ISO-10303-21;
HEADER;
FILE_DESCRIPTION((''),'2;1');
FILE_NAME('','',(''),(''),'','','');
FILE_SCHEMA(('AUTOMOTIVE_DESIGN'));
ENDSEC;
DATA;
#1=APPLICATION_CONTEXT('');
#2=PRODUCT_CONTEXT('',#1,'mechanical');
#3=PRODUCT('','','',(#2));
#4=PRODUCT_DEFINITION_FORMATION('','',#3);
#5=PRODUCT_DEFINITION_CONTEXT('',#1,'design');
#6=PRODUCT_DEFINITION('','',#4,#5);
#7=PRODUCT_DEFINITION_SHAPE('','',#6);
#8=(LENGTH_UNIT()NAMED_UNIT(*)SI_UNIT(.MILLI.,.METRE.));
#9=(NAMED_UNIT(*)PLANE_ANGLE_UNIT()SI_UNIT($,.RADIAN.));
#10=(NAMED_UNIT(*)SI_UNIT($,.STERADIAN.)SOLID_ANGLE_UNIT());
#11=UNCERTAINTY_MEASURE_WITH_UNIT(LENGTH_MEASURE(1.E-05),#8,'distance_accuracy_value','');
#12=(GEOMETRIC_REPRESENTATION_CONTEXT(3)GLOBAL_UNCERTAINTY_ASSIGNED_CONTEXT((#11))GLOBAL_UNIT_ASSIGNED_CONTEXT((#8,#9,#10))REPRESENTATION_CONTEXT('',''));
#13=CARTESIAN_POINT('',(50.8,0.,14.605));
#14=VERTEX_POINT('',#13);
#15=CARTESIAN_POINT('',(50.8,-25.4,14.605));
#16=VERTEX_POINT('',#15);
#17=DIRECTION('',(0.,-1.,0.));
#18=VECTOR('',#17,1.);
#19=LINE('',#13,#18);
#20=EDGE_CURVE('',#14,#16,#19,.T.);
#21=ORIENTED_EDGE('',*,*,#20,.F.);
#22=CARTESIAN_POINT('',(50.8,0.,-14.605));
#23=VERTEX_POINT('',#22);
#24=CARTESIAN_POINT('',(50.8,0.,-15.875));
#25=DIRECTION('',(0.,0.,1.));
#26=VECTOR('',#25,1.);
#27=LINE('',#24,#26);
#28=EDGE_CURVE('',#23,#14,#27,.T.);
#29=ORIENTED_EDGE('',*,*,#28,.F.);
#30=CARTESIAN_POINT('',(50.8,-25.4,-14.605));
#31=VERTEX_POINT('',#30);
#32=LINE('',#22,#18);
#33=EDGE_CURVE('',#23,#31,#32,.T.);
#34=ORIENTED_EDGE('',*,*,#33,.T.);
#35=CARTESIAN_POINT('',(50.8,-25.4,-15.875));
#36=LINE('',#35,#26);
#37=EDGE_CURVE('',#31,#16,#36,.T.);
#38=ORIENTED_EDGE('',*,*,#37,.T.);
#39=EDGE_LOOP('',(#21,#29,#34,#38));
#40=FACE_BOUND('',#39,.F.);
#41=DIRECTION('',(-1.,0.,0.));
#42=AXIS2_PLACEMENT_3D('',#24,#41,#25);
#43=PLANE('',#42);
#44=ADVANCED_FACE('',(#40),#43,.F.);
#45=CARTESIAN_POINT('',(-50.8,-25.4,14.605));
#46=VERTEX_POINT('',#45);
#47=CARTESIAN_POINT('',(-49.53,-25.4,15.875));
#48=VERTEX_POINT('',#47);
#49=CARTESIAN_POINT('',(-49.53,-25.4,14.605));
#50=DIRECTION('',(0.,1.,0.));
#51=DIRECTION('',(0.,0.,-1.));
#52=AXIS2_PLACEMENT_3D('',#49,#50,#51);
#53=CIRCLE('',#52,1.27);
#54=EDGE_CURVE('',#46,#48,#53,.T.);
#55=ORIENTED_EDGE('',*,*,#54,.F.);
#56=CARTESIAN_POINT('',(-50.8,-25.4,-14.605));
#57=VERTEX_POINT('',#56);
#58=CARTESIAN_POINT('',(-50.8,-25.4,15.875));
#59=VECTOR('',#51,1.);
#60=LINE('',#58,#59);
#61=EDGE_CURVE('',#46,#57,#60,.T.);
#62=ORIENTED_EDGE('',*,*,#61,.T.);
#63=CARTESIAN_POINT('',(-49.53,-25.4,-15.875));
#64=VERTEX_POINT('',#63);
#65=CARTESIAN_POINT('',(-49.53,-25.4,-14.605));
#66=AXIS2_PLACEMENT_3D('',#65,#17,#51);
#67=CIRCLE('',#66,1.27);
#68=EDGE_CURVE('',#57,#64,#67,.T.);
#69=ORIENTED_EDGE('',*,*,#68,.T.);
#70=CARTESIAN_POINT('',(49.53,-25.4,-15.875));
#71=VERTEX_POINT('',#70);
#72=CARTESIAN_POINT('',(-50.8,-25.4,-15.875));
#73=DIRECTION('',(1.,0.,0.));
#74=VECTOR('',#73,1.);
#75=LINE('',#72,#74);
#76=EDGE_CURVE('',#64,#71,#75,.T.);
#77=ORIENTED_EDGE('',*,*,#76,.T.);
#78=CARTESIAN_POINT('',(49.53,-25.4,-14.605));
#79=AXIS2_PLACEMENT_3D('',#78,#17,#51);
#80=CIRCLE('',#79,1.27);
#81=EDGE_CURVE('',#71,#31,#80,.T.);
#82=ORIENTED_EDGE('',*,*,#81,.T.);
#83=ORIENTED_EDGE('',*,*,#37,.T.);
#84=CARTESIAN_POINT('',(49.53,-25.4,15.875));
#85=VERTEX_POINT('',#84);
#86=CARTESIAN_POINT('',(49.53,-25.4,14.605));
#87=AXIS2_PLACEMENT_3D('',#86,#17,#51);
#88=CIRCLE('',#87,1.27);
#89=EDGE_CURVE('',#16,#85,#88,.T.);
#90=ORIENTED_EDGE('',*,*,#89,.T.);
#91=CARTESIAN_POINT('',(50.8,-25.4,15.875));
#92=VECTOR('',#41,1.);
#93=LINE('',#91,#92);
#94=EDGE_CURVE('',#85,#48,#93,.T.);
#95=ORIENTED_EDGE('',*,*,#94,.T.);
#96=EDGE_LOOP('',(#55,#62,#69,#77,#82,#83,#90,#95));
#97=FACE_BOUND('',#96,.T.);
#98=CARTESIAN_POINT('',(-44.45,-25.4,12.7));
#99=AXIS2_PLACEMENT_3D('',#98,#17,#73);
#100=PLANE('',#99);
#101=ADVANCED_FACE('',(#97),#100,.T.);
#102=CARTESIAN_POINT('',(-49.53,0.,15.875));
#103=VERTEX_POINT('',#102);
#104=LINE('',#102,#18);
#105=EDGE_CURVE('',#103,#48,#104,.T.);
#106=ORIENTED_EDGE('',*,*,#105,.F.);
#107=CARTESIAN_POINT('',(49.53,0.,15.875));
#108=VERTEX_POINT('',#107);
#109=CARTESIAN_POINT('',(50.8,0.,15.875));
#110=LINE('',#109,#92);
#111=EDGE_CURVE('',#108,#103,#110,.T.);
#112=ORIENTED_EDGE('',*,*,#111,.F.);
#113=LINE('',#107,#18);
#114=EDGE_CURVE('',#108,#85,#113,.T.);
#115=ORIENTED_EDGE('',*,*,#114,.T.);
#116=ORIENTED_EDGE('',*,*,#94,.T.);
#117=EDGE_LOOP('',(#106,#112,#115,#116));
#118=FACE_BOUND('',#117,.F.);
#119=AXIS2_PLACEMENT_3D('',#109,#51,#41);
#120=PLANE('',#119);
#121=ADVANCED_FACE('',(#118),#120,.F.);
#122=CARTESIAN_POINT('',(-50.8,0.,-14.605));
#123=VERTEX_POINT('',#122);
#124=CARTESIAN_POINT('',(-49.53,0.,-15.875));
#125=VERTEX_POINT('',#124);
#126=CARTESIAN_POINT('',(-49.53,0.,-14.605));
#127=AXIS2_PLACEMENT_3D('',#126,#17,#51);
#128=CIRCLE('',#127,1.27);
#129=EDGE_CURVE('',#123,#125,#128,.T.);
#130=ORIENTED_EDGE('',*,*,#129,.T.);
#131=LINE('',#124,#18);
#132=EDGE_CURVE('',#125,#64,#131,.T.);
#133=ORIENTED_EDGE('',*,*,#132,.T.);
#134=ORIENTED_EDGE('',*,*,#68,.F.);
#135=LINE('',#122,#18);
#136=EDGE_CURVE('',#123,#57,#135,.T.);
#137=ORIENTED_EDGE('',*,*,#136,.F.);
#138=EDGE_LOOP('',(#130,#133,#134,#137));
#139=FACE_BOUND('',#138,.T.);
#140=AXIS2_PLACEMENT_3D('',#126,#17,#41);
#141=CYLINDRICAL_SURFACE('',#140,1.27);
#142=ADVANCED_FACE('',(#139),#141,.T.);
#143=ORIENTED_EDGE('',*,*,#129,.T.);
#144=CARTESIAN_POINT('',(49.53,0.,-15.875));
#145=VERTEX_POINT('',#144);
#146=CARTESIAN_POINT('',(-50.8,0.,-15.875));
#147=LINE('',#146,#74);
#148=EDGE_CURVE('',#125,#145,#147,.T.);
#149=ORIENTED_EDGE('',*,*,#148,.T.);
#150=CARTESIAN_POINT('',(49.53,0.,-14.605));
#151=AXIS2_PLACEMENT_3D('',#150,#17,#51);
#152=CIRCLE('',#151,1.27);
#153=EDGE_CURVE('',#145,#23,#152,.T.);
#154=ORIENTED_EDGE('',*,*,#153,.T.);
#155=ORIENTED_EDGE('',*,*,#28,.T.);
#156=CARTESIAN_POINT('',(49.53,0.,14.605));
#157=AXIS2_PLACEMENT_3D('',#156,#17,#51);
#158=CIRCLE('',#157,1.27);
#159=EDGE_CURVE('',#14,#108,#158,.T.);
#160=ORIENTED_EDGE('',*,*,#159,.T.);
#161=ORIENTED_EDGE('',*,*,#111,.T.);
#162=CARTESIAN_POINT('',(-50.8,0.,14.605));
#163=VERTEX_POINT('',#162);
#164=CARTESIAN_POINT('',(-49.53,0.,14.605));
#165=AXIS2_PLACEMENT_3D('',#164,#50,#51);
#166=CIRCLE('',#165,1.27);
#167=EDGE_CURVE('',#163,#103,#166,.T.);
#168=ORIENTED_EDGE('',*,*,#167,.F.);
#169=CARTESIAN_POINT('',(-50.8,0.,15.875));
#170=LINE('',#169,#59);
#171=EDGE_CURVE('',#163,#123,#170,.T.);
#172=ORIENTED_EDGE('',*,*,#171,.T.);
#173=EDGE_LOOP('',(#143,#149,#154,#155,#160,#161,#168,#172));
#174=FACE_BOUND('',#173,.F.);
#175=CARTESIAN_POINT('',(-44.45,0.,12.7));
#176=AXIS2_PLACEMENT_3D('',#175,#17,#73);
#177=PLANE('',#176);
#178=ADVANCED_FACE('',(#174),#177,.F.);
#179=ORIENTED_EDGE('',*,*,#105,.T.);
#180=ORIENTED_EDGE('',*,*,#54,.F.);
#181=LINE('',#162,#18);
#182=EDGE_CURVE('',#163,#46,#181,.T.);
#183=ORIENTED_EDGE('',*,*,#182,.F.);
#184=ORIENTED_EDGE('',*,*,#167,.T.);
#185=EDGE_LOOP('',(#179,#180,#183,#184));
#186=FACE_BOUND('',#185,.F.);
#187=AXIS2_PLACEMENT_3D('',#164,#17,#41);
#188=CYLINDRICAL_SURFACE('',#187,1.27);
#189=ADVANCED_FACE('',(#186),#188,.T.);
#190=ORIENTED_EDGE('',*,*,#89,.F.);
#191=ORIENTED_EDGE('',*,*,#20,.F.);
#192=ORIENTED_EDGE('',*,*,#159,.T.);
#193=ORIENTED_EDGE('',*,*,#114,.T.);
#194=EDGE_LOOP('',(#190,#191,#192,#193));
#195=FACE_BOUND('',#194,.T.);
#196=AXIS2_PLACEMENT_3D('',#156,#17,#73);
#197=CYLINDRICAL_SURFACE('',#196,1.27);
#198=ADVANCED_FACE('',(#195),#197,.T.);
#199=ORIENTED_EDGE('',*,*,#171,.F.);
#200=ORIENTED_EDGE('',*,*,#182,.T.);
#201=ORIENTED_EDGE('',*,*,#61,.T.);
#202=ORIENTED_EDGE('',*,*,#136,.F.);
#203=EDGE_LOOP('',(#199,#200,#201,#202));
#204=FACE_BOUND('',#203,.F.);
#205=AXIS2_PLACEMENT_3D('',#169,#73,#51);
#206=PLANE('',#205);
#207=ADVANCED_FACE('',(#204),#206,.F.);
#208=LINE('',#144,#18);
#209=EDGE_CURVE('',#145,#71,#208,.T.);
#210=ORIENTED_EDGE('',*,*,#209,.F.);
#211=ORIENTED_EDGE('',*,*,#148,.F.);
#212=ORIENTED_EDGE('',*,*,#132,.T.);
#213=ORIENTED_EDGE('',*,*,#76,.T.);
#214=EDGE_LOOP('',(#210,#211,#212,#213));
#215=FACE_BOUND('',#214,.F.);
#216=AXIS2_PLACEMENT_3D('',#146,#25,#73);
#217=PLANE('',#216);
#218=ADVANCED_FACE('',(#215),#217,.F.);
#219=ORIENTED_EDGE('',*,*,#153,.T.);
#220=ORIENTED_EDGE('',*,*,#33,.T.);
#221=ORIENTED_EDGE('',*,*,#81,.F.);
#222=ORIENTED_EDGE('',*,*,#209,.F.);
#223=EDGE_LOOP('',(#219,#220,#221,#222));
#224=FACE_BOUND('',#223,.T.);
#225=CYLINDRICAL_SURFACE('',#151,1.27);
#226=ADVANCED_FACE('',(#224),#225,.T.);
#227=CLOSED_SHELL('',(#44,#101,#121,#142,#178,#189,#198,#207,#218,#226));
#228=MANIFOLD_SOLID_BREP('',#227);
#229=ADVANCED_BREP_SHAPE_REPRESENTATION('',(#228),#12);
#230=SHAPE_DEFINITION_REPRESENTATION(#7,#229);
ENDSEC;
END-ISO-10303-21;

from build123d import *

# Parameters (mm, degrees)
F0_W     = 6.35
F0_H     = 6.35
F1_DEPTH = 25.4
F2_R     = 1.27


with BuildPart() as f1:
    # F0 (on Front) → F1 (new body)
    with BuildSketch(Plane.XZ):
        Polygon((-50.8, 15.875), (-50.8, 9.525), (-44.45, 9.525), (-38.1, 9.525), (-38.1, 15.875), align=None)
        with Locations((-47.625, 6.35)):
            Rectangle(F0_W, F0_H)
        Polygon((-50.8, 3.175), (-50.8, -3.175), (-44.45, -3.175), (-38.1, -3.175), (-38.1, 3.175), (-44.45, 3.175), align=None)
        with Locations((-47.625, -6.35)):
            Rectangle(F0_W, F0_H)
        Polygon((-50.8, -15.875), (0, -15.875), (0, -9.525), (-6.35, -9.525), (-44.45, -9.525), (-50.8, -9.525), align=None)
        Polygon((0, -15.875), (50.8, -15.875), (50.8, -9.525), (44.45, -9.525), (6.35, -9.525), (0, -9.525), align=None)
        with Locations((3.175, -6.35)):
            Rectangle(F0_W, F0_H)
        with Locations((-3.175, -6.35)):
            Rectangle(F0_W, F0_H)
        Polygon((-6.35, -3.175), (0, -3.175), (0, 3.175), (-6.35, 3.175), (-12.7, 3.175), (-12.7, -3.175), align=None)
        Polygon((0, 3.175), (0, -3.175), (6.35, -3.175), (12.7, -3.175), (12.7, 3.175), (6.35, 3.175), align=None)
        with Locations((3.175, 6.35)):
            Rectangle(F0_W, F0_H)
        with Locations((-3.175, 6.35)):
            Rectangle(F0_W, F0_H)
        Polygon((-6.35, 9.525), (0, 9.525), (0, 15.875), (-12.7, 15.875), (-12.7, 9.525), align=None)
        Polygon((0, 15.875), (0, 9.525), (6.35, 9.525), (12.7, 9.525), (12.7, 15.875), align=None)
        Polygon((44.45, 9.525), (50.8, 9.525), (50.8, 15.875), (38.1, 15.875), (38.1, 9.525), align=None)
        with Locations((47.625, 6.35)):
            Rectangle(F0_W, F0_H)
        Polygon((44.45, -3.175), (50.8, -3.175), (50.8, 3.175), (44.45, 3.175), (38.1, 3.175), (38.1, -3.175), align=None)
        with Locations((47.625, -6.35)):
            Rectangle(F0_W, F0_H)
        Polygon((-44.45, -9.525), (-6.35, -9.525), (-6.35, -3.175), (-12.7, -3.175), (-12.7, 3.175), (-6.35, 3.175), (-6.35, 9.525), (-12.7, 9.525), (-12.7, 15.875), (-38.1, 15.875), (-38.1, 9.525), (-44.45, 9.525), (-44.45, 3.175), (-38.1, 3.175), (-38.1, -3.175), (-44.45, -3.175), align=None)
        Polygon((6.35, -9.525), (44.45, -9.525), (44.45, -3.175), (38.1, -3.175), (38.1, 3.175), (44.45, 3.175), (44.45, 9.525), (38.1, 9.525), (38.1, 15.875), (12.7, 15.875), (12.7, 9.525), (6.35, 9.525), (6.35, 3.175), (12.7, 3.175), (12.7, -3.175), (6.35, -3.175), align=None)
    extrude(amount=F1_DEPTH)

    # F2
    f2_edges = [f1.edges().sort_by_distance(p)[0] for p in [
        (-50.8, -12.7, 15.875),
        (-50.8, -12.7, -15.875),
        (50.8, -12.7, 15.875),
        (50.8, -12.7, -15.875),
    ]]
    fillet(f2_edges, radius=F2_R)


solid = f1.part
